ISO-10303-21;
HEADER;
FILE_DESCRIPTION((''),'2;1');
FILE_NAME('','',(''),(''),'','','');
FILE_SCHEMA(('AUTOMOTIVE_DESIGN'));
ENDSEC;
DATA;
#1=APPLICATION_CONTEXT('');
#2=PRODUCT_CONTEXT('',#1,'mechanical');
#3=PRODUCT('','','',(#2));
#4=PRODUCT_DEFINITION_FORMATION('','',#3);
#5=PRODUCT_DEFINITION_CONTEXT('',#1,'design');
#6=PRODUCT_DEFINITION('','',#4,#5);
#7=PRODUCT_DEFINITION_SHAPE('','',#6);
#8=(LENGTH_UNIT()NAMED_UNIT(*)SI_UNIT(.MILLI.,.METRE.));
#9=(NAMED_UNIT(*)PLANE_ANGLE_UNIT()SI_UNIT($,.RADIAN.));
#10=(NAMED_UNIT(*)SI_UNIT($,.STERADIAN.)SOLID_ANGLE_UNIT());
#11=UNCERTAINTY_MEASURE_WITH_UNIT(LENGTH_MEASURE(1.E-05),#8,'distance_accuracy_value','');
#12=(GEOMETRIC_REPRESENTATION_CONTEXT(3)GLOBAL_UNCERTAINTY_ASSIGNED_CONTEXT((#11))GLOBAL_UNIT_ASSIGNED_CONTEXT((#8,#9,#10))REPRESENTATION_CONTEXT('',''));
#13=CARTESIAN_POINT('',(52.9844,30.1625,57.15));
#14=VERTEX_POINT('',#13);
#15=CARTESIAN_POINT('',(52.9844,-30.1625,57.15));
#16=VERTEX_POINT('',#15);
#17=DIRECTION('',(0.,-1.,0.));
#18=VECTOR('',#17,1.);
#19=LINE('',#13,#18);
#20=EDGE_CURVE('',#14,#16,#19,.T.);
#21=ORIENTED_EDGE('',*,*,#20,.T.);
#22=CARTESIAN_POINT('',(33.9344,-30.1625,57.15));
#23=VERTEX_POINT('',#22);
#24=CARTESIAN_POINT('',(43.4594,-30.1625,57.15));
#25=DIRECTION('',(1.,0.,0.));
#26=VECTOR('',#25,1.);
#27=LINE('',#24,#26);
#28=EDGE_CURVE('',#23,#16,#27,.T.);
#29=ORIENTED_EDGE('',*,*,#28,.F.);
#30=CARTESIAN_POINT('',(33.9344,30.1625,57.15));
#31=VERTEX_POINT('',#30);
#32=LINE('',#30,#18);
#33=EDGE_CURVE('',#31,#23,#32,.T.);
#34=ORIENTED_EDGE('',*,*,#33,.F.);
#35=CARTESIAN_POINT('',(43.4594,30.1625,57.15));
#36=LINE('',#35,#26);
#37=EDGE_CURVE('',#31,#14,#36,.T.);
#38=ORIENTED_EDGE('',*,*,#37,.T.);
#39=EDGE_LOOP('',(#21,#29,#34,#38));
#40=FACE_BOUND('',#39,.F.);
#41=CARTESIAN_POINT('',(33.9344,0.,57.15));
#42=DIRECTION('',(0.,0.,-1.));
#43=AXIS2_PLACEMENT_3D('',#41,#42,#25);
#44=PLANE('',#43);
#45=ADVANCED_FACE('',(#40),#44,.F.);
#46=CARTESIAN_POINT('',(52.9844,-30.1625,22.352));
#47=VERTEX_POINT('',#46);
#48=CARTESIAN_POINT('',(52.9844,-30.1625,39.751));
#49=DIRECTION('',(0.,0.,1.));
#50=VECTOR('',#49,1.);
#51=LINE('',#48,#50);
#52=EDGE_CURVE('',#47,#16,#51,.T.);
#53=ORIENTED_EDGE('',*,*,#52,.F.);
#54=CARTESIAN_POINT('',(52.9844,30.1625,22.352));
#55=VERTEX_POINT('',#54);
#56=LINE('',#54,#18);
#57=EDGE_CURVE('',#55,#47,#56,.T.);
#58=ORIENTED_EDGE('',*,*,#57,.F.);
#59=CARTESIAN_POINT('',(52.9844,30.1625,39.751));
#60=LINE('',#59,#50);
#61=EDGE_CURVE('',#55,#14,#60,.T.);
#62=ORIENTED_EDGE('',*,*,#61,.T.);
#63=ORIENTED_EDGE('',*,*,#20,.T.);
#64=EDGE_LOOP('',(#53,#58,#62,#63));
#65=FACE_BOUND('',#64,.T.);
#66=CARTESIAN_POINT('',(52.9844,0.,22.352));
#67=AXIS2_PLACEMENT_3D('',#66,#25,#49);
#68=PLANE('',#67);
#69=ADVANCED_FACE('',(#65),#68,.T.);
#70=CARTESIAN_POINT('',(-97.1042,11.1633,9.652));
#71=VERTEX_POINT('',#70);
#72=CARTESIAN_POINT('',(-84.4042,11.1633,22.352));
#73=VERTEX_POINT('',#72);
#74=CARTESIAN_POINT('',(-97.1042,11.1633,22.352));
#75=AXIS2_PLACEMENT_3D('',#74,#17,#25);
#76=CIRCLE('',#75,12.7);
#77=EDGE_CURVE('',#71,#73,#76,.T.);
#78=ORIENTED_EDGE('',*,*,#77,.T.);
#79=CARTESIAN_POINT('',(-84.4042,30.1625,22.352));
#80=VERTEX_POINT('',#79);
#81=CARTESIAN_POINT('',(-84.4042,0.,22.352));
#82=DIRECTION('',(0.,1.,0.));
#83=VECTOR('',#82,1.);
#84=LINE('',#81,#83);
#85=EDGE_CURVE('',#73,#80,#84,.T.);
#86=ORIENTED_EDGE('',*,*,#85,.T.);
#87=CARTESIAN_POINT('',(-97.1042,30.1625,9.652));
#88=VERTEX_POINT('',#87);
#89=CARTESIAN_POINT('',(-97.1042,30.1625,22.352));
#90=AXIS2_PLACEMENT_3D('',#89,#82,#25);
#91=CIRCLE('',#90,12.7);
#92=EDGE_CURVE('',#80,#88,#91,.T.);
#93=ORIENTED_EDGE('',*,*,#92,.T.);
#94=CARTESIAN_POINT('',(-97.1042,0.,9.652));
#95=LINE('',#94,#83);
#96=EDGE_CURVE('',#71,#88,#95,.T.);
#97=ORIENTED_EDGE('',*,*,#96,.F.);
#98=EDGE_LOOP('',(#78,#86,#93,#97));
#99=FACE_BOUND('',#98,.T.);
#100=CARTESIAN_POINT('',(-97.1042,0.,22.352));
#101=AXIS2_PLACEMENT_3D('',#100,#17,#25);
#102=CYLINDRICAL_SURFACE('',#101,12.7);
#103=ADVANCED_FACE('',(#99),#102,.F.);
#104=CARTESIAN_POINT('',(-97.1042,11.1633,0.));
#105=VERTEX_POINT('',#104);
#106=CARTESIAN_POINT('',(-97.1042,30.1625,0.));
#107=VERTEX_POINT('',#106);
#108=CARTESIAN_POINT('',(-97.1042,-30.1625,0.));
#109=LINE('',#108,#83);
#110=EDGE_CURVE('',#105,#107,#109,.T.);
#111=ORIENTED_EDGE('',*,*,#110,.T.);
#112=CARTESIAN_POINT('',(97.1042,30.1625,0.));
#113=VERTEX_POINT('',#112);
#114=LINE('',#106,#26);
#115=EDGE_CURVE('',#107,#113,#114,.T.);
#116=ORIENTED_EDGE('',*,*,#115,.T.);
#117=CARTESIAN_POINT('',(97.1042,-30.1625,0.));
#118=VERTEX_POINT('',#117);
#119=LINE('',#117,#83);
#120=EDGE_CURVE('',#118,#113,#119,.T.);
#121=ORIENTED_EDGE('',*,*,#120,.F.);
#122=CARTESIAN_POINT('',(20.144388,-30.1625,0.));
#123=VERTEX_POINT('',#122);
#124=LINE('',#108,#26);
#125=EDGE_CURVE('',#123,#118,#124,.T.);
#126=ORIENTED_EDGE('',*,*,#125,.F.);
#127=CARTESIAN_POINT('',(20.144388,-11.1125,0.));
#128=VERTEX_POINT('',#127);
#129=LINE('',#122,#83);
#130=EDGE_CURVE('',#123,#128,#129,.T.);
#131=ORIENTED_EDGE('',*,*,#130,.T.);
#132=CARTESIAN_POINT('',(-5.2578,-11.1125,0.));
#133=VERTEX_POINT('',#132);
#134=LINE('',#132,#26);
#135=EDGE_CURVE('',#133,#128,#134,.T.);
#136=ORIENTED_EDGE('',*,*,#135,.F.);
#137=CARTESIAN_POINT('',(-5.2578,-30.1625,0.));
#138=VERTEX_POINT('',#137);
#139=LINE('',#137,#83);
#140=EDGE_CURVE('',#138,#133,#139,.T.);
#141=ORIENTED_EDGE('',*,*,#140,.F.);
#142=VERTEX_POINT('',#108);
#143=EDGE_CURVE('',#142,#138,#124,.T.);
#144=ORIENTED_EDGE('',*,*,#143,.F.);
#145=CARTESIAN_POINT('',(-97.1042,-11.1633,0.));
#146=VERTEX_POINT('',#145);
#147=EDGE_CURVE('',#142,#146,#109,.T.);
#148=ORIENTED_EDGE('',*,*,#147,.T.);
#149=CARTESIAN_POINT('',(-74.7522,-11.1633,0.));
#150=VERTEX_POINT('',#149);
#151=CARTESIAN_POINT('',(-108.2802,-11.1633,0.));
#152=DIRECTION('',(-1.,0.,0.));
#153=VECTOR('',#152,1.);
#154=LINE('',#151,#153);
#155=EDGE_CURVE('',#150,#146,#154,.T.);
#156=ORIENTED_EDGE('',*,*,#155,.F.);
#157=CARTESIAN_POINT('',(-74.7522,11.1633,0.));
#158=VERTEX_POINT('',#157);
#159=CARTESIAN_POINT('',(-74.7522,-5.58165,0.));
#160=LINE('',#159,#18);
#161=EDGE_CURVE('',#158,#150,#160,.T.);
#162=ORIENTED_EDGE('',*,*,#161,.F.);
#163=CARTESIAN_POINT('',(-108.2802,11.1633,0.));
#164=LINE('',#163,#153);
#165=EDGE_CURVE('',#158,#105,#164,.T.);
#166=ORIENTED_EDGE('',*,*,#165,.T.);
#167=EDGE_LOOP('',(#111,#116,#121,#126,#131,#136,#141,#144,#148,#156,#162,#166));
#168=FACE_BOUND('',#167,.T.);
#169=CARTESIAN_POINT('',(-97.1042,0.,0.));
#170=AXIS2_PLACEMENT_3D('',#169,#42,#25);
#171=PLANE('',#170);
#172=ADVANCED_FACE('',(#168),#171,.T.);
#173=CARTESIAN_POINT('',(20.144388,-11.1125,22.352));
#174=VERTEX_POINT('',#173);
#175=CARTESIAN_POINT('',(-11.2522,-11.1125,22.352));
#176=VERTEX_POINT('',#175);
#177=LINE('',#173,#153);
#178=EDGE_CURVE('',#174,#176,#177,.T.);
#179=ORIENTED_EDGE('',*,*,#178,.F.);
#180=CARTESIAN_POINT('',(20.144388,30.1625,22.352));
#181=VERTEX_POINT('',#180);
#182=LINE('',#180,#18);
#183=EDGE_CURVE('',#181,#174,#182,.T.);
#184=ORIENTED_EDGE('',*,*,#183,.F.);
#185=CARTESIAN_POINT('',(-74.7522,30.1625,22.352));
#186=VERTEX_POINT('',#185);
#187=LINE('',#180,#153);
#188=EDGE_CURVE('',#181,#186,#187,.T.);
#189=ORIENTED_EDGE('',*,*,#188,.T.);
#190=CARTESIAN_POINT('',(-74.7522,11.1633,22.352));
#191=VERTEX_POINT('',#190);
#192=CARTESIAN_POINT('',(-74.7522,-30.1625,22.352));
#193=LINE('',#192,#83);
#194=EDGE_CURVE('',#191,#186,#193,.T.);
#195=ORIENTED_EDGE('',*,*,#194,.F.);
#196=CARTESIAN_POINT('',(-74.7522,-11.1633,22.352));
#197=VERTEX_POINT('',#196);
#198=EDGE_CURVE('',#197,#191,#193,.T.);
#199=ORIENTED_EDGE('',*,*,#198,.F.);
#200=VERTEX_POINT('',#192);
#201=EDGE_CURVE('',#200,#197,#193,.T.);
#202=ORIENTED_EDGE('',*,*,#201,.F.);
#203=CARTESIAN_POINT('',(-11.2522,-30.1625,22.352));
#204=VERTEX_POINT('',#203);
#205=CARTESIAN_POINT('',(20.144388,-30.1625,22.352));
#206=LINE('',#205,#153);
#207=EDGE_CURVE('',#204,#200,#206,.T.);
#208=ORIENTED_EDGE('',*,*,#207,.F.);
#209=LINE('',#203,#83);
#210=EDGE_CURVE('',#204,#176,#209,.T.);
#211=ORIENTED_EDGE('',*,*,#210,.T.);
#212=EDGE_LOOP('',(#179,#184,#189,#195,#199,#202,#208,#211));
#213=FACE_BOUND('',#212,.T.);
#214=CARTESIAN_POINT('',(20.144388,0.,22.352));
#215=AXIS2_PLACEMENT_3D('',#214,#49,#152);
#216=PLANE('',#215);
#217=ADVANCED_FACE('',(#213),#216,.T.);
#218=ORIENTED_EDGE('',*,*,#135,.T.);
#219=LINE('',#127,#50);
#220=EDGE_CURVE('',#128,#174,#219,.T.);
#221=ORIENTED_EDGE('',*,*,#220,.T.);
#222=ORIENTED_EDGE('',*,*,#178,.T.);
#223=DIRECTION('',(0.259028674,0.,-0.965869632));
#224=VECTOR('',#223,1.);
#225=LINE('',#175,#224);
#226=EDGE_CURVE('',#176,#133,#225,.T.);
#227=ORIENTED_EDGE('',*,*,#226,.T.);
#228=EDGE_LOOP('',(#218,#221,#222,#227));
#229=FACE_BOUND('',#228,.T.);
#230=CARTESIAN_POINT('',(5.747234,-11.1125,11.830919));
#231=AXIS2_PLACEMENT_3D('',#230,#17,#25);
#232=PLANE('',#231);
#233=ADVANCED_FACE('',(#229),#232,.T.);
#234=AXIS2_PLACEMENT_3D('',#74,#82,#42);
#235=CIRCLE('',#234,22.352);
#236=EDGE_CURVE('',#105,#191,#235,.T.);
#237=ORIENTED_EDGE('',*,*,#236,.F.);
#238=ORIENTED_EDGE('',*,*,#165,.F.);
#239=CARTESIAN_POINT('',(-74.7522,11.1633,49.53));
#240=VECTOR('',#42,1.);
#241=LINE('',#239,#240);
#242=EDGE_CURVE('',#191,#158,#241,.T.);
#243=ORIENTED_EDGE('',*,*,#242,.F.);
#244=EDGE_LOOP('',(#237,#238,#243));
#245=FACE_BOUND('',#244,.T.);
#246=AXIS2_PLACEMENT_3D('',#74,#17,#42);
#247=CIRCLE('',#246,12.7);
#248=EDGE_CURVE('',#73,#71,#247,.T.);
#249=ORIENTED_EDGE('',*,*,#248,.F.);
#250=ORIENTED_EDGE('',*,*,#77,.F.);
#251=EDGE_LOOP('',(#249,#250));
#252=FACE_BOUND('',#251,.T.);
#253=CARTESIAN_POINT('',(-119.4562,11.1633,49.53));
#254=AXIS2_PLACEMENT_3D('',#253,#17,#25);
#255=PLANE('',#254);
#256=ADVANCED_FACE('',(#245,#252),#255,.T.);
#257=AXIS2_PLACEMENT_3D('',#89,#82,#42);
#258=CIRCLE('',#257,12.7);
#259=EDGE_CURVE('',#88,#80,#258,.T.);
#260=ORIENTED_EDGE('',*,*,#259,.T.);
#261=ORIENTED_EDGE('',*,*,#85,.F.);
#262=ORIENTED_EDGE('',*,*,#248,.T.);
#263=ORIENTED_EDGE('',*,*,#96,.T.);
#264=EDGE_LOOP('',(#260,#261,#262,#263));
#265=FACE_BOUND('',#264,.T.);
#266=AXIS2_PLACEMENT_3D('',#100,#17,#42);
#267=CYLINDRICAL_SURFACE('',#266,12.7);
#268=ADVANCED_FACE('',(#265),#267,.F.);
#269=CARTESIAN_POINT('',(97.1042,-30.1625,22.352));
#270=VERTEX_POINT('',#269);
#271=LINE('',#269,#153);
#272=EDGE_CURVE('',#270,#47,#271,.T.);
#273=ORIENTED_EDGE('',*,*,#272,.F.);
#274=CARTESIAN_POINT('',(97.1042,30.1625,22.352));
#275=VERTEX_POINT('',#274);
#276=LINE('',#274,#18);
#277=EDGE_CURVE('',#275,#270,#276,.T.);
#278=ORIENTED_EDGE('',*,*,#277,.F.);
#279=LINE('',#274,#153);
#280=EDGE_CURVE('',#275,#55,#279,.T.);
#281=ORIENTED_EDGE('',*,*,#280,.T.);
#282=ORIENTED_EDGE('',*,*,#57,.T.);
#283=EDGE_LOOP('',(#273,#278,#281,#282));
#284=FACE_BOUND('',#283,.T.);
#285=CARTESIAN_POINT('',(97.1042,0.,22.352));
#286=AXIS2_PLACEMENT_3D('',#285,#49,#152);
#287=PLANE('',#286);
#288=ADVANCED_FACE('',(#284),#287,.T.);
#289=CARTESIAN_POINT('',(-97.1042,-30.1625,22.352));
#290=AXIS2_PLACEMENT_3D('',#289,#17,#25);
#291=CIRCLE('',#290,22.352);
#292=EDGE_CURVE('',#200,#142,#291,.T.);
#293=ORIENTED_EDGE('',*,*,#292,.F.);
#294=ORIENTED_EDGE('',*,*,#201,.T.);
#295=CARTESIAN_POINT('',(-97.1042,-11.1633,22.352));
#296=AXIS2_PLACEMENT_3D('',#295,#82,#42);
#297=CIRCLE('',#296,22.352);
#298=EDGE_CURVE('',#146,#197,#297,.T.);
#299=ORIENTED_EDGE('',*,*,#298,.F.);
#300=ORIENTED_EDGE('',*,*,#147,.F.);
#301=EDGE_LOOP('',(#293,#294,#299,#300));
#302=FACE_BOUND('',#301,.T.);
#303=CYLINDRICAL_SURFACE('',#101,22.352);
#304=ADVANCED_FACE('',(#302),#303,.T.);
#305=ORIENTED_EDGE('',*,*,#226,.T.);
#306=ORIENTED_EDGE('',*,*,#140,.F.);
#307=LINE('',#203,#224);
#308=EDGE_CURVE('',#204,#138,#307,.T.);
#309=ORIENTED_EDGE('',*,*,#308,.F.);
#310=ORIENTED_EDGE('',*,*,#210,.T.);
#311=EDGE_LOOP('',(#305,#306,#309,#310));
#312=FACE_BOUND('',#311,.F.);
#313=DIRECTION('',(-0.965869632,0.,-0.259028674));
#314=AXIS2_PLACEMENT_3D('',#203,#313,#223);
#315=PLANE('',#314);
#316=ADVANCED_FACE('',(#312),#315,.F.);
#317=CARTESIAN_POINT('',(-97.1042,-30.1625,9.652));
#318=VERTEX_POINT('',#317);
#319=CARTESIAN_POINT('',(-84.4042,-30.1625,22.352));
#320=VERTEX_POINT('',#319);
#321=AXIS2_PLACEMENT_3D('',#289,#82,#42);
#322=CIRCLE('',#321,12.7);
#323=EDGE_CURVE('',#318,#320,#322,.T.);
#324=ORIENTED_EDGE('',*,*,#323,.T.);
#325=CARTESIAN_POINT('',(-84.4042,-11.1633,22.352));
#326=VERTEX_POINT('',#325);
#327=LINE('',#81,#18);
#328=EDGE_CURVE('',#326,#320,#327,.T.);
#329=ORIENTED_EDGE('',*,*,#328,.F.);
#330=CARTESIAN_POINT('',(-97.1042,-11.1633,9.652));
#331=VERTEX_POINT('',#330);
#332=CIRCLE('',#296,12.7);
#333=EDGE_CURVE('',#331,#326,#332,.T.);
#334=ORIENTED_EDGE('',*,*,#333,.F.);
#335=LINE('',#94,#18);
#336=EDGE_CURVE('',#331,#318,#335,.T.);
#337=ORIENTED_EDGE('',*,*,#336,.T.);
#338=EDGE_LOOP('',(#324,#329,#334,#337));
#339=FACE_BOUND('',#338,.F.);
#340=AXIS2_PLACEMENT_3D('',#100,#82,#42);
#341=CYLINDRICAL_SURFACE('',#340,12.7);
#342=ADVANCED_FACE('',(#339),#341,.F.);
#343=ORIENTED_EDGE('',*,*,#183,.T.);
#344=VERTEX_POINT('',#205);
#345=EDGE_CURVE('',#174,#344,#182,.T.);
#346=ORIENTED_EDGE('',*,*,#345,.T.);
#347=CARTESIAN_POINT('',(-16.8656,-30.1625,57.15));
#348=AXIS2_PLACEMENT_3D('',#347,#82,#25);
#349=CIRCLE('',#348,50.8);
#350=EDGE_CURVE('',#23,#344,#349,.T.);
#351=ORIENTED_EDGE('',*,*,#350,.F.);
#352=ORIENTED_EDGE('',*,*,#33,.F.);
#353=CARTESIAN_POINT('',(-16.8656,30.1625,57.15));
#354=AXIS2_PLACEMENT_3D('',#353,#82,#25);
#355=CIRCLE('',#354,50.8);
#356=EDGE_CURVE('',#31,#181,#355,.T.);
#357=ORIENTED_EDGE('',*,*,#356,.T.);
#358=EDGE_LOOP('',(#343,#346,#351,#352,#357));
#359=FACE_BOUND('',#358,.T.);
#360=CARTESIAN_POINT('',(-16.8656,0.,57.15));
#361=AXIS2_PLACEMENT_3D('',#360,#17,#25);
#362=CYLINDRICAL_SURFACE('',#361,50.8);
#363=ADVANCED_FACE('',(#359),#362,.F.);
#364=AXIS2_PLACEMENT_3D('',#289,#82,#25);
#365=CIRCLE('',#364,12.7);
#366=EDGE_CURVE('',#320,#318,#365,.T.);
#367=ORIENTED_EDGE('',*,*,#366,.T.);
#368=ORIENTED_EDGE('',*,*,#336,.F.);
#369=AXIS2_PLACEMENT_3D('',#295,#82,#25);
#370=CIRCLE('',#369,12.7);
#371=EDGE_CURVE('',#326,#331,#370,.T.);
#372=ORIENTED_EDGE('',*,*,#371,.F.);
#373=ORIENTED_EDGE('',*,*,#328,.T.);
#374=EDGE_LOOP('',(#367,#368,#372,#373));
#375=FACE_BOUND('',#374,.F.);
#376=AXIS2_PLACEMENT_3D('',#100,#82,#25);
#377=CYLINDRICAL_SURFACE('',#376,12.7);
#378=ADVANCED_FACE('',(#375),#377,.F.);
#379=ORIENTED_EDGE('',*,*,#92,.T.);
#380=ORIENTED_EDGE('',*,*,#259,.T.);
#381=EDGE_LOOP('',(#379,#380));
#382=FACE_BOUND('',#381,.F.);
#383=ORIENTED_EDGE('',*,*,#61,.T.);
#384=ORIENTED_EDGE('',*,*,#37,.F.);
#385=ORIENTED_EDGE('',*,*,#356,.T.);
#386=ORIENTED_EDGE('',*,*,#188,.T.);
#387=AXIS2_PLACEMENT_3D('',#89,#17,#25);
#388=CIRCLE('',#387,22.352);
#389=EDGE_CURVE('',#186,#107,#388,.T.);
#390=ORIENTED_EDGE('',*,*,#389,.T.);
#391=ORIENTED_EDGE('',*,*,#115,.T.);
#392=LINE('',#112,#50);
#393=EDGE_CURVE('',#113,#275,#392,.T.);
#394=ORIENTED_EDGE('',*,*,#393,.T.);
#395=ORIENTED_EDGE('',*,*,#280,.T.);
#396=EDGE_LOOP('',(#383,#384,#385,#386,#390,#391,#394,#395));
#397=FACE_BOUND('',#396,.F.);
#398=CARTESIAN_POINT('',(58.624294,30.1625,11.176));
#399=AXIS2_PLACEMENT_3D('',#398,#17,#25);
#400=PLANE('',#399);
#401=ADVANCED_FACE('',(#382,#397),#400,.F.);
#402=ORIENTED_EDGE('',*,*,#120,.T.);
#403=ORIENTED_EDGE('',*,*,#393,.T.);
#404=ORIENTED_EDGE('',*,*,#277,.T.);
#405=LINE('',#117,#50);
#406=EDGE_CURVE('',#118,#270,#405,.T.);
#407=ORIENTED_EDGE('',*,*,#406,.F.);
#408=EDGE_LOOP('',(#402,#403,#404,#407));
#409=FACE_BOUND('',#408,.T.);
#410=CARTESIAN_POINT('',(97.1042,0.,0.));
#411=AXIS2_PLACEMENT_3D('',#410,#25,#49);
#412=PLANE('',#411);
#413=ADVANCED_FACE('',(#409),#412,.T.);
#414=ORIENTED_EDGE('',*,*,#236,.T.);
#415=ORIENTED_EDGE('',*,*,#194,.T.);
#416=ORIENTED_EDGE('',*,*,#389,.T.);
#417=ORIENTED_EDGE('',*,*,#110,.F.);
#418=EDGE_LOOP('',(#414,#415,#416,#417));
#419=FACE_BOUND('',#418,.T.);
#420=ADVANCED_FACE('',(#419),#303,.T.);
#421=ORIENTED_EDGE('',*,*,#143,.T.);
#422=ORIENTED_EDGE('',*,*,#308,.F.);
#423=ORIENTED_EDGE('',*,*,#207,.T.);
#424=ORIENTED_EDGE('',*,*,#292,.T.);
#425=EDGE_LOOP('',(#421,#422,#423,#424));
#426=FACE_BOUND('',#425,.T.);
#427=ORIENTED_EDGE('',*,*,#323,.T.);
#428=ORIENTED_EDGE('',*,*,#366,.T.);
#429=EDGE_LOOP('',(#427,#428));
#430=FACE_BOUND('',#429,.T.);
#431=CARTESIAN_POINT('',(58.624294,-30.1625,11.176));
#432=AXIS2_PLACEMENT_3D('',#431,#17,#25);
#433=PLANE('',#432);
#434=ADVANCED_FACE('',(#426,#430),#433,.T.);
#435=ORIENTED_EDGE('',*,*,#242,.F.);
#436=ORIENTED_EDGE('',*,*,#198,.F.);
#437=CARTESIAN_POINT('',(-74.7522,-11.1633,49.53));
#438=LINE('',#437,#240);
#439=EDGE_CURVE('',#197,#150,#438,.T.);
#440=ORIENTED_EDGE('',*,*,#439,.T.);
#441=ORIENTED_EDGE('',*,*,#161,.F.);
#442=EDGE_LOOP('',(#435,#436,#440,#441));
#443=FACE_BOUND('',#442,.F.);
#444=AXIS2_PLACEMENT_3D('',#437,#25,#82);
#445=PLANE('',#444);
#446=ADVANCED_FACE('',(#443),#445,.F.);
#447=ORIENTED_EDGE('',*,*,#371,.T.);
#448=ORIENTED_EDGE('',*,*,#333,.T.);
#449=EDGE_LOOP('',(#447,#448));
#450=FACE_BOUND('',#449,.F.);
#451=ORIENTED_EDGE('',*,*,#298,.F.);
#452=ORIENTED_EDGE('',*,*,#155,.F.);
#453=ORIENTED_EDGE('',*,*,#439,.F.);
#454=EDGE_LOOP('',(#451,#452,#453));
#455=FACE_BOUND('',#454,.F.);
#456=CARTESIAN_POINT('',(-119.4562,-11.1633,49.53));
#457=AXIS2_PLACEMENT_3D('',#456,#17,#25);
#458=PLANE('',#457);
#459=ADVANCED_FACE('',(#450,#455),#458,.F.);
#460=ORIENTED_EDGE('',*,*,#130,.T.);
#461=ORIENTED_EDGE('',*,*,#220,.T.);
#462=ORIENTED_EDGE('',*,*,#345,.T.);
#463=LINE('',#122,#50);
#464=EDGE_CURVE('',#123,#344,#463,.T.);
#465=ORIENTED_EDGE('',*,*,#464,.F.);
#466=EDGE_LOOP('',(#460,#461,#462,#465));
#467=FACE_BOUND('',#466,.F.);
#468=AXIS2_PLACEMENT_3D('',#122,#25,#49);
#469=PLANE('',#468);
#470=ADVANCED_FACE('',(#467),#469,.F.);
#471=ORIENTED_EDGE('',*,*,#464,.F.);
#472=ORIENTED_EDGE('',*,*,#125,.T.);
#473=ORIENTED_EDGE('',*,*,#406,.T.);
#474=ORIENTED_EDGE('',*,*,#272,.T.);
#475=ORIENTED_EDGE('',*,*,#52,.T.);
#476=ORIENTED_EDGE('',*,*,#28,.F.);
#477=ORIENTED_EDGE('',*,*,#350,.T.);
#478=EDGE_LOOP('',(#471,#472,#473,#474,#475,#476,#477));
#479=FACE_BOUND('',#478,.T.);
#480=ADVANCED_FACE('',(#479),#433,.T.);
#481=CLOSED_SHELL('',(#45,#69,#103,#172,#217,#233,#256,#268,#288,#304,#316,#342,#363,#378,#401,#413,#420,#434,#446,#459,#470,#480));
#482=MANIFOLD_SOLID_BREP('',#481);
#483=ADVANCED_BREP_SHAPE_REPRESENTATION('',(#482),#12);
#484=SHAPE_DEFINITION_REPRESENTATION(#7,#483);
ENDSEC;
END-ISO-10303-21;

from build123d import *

# Parameters (mm, degrees)
F0_W     = 19.05
F0_H     = 34.798
F1_DEPTH = 30.1625
F3_DEPTH = 19.05
F5_W     = 44.704
F5_H     = 22.3266
F6_DEPTH = 49.531


with BuildPart() as f1:
    # F0 (on Front) → F1 (new body, symmetric)
    with BuildSketch(Plane.XZ):
        Polygon((97.1042, 0), (97.1042, 22.352), (52.9844, 22.352), (33.9344, 22.352), (20.1443877871, 22.352), (20.1443877871, 0), align=None)
        with Locations((43.4594, 39.751)):
            Rectangle(F0_W, F0_H)
        with BuildLine():
            Line((20.1443877871, 22.352), (33.9344, 22.352))
            Line((33.9344, 22.352), (33.9344, 57.15))
            ThreePointArc((33.9344, 57.15), (30.3612323074, 38.4345969798), (20.1443877871, 22.352))
        make_face()
        with BuildLine():
            Line((-97.1042, 0), (20.1443877871, 0))
            Line((20.1443877871, 0), (20.1443877871, 22.352))
            Line((20.1443877871, 22.352), (-74.7522, 22.352))
            ThreePointArc((-74.7522, 22.352), (-81.2989492269, 6.5467492269), (-97.1042, 0))
        make_face()
        with BuildLine():
            ThreePointArc((-74.7522, 22.352), (-112.9094507731, 38.1572507731), (-97.1042, 0))
            Line((-97.1042, 0), (-97.1042, 9.652))
            ThreePointArc((-97.1042, 9.652), (-106.0844561211, 31.3322561211), (-84.4042, 22.352))
            Line((-84.4042, 22.352), (-74.7522, 22.352))
        make_face()
        with BuildLine():
            Line((-97.1042, 9.652), (-97.1042, 0))
            ThreePointArc((-97.1042, 0), (-81.2989492269, 6.5467492269), (-74.7522, 22.352))
            Line((-74.7522, 22.352), (-84.4042, 22.352))
            ThreePointArc((-84.4042, 22.352), (-88.1239438789, 13.3717438789), (-97.1042, 9.652))
        make_face()
    extrude(amount=F1_DEPTH, both=True)

    # F2 (on face) → F3 (cut)
    with BuildSketch(Plane.XZ.offset(30.1625)):
        Polygon((-5.2578, 0), (20.1443877871, 0), (20.1443877871, 22.352), (-11.2522, 22.352), align=None)
    extrude(amount=-F3_DEPTH, mode=Mode.SUBTRACT)

    # F5 (on offset) → F6 (cut, through all)
    with BuildSketch(Plane.XY.offset(49.53)):
        with Locations((-97.1042, 0)):
            Rectangle(F5_W, F5_H)
    extrude(amount=-F6_DEPTH, mode=Mode.SUBTRACT)


solid = f1.part
